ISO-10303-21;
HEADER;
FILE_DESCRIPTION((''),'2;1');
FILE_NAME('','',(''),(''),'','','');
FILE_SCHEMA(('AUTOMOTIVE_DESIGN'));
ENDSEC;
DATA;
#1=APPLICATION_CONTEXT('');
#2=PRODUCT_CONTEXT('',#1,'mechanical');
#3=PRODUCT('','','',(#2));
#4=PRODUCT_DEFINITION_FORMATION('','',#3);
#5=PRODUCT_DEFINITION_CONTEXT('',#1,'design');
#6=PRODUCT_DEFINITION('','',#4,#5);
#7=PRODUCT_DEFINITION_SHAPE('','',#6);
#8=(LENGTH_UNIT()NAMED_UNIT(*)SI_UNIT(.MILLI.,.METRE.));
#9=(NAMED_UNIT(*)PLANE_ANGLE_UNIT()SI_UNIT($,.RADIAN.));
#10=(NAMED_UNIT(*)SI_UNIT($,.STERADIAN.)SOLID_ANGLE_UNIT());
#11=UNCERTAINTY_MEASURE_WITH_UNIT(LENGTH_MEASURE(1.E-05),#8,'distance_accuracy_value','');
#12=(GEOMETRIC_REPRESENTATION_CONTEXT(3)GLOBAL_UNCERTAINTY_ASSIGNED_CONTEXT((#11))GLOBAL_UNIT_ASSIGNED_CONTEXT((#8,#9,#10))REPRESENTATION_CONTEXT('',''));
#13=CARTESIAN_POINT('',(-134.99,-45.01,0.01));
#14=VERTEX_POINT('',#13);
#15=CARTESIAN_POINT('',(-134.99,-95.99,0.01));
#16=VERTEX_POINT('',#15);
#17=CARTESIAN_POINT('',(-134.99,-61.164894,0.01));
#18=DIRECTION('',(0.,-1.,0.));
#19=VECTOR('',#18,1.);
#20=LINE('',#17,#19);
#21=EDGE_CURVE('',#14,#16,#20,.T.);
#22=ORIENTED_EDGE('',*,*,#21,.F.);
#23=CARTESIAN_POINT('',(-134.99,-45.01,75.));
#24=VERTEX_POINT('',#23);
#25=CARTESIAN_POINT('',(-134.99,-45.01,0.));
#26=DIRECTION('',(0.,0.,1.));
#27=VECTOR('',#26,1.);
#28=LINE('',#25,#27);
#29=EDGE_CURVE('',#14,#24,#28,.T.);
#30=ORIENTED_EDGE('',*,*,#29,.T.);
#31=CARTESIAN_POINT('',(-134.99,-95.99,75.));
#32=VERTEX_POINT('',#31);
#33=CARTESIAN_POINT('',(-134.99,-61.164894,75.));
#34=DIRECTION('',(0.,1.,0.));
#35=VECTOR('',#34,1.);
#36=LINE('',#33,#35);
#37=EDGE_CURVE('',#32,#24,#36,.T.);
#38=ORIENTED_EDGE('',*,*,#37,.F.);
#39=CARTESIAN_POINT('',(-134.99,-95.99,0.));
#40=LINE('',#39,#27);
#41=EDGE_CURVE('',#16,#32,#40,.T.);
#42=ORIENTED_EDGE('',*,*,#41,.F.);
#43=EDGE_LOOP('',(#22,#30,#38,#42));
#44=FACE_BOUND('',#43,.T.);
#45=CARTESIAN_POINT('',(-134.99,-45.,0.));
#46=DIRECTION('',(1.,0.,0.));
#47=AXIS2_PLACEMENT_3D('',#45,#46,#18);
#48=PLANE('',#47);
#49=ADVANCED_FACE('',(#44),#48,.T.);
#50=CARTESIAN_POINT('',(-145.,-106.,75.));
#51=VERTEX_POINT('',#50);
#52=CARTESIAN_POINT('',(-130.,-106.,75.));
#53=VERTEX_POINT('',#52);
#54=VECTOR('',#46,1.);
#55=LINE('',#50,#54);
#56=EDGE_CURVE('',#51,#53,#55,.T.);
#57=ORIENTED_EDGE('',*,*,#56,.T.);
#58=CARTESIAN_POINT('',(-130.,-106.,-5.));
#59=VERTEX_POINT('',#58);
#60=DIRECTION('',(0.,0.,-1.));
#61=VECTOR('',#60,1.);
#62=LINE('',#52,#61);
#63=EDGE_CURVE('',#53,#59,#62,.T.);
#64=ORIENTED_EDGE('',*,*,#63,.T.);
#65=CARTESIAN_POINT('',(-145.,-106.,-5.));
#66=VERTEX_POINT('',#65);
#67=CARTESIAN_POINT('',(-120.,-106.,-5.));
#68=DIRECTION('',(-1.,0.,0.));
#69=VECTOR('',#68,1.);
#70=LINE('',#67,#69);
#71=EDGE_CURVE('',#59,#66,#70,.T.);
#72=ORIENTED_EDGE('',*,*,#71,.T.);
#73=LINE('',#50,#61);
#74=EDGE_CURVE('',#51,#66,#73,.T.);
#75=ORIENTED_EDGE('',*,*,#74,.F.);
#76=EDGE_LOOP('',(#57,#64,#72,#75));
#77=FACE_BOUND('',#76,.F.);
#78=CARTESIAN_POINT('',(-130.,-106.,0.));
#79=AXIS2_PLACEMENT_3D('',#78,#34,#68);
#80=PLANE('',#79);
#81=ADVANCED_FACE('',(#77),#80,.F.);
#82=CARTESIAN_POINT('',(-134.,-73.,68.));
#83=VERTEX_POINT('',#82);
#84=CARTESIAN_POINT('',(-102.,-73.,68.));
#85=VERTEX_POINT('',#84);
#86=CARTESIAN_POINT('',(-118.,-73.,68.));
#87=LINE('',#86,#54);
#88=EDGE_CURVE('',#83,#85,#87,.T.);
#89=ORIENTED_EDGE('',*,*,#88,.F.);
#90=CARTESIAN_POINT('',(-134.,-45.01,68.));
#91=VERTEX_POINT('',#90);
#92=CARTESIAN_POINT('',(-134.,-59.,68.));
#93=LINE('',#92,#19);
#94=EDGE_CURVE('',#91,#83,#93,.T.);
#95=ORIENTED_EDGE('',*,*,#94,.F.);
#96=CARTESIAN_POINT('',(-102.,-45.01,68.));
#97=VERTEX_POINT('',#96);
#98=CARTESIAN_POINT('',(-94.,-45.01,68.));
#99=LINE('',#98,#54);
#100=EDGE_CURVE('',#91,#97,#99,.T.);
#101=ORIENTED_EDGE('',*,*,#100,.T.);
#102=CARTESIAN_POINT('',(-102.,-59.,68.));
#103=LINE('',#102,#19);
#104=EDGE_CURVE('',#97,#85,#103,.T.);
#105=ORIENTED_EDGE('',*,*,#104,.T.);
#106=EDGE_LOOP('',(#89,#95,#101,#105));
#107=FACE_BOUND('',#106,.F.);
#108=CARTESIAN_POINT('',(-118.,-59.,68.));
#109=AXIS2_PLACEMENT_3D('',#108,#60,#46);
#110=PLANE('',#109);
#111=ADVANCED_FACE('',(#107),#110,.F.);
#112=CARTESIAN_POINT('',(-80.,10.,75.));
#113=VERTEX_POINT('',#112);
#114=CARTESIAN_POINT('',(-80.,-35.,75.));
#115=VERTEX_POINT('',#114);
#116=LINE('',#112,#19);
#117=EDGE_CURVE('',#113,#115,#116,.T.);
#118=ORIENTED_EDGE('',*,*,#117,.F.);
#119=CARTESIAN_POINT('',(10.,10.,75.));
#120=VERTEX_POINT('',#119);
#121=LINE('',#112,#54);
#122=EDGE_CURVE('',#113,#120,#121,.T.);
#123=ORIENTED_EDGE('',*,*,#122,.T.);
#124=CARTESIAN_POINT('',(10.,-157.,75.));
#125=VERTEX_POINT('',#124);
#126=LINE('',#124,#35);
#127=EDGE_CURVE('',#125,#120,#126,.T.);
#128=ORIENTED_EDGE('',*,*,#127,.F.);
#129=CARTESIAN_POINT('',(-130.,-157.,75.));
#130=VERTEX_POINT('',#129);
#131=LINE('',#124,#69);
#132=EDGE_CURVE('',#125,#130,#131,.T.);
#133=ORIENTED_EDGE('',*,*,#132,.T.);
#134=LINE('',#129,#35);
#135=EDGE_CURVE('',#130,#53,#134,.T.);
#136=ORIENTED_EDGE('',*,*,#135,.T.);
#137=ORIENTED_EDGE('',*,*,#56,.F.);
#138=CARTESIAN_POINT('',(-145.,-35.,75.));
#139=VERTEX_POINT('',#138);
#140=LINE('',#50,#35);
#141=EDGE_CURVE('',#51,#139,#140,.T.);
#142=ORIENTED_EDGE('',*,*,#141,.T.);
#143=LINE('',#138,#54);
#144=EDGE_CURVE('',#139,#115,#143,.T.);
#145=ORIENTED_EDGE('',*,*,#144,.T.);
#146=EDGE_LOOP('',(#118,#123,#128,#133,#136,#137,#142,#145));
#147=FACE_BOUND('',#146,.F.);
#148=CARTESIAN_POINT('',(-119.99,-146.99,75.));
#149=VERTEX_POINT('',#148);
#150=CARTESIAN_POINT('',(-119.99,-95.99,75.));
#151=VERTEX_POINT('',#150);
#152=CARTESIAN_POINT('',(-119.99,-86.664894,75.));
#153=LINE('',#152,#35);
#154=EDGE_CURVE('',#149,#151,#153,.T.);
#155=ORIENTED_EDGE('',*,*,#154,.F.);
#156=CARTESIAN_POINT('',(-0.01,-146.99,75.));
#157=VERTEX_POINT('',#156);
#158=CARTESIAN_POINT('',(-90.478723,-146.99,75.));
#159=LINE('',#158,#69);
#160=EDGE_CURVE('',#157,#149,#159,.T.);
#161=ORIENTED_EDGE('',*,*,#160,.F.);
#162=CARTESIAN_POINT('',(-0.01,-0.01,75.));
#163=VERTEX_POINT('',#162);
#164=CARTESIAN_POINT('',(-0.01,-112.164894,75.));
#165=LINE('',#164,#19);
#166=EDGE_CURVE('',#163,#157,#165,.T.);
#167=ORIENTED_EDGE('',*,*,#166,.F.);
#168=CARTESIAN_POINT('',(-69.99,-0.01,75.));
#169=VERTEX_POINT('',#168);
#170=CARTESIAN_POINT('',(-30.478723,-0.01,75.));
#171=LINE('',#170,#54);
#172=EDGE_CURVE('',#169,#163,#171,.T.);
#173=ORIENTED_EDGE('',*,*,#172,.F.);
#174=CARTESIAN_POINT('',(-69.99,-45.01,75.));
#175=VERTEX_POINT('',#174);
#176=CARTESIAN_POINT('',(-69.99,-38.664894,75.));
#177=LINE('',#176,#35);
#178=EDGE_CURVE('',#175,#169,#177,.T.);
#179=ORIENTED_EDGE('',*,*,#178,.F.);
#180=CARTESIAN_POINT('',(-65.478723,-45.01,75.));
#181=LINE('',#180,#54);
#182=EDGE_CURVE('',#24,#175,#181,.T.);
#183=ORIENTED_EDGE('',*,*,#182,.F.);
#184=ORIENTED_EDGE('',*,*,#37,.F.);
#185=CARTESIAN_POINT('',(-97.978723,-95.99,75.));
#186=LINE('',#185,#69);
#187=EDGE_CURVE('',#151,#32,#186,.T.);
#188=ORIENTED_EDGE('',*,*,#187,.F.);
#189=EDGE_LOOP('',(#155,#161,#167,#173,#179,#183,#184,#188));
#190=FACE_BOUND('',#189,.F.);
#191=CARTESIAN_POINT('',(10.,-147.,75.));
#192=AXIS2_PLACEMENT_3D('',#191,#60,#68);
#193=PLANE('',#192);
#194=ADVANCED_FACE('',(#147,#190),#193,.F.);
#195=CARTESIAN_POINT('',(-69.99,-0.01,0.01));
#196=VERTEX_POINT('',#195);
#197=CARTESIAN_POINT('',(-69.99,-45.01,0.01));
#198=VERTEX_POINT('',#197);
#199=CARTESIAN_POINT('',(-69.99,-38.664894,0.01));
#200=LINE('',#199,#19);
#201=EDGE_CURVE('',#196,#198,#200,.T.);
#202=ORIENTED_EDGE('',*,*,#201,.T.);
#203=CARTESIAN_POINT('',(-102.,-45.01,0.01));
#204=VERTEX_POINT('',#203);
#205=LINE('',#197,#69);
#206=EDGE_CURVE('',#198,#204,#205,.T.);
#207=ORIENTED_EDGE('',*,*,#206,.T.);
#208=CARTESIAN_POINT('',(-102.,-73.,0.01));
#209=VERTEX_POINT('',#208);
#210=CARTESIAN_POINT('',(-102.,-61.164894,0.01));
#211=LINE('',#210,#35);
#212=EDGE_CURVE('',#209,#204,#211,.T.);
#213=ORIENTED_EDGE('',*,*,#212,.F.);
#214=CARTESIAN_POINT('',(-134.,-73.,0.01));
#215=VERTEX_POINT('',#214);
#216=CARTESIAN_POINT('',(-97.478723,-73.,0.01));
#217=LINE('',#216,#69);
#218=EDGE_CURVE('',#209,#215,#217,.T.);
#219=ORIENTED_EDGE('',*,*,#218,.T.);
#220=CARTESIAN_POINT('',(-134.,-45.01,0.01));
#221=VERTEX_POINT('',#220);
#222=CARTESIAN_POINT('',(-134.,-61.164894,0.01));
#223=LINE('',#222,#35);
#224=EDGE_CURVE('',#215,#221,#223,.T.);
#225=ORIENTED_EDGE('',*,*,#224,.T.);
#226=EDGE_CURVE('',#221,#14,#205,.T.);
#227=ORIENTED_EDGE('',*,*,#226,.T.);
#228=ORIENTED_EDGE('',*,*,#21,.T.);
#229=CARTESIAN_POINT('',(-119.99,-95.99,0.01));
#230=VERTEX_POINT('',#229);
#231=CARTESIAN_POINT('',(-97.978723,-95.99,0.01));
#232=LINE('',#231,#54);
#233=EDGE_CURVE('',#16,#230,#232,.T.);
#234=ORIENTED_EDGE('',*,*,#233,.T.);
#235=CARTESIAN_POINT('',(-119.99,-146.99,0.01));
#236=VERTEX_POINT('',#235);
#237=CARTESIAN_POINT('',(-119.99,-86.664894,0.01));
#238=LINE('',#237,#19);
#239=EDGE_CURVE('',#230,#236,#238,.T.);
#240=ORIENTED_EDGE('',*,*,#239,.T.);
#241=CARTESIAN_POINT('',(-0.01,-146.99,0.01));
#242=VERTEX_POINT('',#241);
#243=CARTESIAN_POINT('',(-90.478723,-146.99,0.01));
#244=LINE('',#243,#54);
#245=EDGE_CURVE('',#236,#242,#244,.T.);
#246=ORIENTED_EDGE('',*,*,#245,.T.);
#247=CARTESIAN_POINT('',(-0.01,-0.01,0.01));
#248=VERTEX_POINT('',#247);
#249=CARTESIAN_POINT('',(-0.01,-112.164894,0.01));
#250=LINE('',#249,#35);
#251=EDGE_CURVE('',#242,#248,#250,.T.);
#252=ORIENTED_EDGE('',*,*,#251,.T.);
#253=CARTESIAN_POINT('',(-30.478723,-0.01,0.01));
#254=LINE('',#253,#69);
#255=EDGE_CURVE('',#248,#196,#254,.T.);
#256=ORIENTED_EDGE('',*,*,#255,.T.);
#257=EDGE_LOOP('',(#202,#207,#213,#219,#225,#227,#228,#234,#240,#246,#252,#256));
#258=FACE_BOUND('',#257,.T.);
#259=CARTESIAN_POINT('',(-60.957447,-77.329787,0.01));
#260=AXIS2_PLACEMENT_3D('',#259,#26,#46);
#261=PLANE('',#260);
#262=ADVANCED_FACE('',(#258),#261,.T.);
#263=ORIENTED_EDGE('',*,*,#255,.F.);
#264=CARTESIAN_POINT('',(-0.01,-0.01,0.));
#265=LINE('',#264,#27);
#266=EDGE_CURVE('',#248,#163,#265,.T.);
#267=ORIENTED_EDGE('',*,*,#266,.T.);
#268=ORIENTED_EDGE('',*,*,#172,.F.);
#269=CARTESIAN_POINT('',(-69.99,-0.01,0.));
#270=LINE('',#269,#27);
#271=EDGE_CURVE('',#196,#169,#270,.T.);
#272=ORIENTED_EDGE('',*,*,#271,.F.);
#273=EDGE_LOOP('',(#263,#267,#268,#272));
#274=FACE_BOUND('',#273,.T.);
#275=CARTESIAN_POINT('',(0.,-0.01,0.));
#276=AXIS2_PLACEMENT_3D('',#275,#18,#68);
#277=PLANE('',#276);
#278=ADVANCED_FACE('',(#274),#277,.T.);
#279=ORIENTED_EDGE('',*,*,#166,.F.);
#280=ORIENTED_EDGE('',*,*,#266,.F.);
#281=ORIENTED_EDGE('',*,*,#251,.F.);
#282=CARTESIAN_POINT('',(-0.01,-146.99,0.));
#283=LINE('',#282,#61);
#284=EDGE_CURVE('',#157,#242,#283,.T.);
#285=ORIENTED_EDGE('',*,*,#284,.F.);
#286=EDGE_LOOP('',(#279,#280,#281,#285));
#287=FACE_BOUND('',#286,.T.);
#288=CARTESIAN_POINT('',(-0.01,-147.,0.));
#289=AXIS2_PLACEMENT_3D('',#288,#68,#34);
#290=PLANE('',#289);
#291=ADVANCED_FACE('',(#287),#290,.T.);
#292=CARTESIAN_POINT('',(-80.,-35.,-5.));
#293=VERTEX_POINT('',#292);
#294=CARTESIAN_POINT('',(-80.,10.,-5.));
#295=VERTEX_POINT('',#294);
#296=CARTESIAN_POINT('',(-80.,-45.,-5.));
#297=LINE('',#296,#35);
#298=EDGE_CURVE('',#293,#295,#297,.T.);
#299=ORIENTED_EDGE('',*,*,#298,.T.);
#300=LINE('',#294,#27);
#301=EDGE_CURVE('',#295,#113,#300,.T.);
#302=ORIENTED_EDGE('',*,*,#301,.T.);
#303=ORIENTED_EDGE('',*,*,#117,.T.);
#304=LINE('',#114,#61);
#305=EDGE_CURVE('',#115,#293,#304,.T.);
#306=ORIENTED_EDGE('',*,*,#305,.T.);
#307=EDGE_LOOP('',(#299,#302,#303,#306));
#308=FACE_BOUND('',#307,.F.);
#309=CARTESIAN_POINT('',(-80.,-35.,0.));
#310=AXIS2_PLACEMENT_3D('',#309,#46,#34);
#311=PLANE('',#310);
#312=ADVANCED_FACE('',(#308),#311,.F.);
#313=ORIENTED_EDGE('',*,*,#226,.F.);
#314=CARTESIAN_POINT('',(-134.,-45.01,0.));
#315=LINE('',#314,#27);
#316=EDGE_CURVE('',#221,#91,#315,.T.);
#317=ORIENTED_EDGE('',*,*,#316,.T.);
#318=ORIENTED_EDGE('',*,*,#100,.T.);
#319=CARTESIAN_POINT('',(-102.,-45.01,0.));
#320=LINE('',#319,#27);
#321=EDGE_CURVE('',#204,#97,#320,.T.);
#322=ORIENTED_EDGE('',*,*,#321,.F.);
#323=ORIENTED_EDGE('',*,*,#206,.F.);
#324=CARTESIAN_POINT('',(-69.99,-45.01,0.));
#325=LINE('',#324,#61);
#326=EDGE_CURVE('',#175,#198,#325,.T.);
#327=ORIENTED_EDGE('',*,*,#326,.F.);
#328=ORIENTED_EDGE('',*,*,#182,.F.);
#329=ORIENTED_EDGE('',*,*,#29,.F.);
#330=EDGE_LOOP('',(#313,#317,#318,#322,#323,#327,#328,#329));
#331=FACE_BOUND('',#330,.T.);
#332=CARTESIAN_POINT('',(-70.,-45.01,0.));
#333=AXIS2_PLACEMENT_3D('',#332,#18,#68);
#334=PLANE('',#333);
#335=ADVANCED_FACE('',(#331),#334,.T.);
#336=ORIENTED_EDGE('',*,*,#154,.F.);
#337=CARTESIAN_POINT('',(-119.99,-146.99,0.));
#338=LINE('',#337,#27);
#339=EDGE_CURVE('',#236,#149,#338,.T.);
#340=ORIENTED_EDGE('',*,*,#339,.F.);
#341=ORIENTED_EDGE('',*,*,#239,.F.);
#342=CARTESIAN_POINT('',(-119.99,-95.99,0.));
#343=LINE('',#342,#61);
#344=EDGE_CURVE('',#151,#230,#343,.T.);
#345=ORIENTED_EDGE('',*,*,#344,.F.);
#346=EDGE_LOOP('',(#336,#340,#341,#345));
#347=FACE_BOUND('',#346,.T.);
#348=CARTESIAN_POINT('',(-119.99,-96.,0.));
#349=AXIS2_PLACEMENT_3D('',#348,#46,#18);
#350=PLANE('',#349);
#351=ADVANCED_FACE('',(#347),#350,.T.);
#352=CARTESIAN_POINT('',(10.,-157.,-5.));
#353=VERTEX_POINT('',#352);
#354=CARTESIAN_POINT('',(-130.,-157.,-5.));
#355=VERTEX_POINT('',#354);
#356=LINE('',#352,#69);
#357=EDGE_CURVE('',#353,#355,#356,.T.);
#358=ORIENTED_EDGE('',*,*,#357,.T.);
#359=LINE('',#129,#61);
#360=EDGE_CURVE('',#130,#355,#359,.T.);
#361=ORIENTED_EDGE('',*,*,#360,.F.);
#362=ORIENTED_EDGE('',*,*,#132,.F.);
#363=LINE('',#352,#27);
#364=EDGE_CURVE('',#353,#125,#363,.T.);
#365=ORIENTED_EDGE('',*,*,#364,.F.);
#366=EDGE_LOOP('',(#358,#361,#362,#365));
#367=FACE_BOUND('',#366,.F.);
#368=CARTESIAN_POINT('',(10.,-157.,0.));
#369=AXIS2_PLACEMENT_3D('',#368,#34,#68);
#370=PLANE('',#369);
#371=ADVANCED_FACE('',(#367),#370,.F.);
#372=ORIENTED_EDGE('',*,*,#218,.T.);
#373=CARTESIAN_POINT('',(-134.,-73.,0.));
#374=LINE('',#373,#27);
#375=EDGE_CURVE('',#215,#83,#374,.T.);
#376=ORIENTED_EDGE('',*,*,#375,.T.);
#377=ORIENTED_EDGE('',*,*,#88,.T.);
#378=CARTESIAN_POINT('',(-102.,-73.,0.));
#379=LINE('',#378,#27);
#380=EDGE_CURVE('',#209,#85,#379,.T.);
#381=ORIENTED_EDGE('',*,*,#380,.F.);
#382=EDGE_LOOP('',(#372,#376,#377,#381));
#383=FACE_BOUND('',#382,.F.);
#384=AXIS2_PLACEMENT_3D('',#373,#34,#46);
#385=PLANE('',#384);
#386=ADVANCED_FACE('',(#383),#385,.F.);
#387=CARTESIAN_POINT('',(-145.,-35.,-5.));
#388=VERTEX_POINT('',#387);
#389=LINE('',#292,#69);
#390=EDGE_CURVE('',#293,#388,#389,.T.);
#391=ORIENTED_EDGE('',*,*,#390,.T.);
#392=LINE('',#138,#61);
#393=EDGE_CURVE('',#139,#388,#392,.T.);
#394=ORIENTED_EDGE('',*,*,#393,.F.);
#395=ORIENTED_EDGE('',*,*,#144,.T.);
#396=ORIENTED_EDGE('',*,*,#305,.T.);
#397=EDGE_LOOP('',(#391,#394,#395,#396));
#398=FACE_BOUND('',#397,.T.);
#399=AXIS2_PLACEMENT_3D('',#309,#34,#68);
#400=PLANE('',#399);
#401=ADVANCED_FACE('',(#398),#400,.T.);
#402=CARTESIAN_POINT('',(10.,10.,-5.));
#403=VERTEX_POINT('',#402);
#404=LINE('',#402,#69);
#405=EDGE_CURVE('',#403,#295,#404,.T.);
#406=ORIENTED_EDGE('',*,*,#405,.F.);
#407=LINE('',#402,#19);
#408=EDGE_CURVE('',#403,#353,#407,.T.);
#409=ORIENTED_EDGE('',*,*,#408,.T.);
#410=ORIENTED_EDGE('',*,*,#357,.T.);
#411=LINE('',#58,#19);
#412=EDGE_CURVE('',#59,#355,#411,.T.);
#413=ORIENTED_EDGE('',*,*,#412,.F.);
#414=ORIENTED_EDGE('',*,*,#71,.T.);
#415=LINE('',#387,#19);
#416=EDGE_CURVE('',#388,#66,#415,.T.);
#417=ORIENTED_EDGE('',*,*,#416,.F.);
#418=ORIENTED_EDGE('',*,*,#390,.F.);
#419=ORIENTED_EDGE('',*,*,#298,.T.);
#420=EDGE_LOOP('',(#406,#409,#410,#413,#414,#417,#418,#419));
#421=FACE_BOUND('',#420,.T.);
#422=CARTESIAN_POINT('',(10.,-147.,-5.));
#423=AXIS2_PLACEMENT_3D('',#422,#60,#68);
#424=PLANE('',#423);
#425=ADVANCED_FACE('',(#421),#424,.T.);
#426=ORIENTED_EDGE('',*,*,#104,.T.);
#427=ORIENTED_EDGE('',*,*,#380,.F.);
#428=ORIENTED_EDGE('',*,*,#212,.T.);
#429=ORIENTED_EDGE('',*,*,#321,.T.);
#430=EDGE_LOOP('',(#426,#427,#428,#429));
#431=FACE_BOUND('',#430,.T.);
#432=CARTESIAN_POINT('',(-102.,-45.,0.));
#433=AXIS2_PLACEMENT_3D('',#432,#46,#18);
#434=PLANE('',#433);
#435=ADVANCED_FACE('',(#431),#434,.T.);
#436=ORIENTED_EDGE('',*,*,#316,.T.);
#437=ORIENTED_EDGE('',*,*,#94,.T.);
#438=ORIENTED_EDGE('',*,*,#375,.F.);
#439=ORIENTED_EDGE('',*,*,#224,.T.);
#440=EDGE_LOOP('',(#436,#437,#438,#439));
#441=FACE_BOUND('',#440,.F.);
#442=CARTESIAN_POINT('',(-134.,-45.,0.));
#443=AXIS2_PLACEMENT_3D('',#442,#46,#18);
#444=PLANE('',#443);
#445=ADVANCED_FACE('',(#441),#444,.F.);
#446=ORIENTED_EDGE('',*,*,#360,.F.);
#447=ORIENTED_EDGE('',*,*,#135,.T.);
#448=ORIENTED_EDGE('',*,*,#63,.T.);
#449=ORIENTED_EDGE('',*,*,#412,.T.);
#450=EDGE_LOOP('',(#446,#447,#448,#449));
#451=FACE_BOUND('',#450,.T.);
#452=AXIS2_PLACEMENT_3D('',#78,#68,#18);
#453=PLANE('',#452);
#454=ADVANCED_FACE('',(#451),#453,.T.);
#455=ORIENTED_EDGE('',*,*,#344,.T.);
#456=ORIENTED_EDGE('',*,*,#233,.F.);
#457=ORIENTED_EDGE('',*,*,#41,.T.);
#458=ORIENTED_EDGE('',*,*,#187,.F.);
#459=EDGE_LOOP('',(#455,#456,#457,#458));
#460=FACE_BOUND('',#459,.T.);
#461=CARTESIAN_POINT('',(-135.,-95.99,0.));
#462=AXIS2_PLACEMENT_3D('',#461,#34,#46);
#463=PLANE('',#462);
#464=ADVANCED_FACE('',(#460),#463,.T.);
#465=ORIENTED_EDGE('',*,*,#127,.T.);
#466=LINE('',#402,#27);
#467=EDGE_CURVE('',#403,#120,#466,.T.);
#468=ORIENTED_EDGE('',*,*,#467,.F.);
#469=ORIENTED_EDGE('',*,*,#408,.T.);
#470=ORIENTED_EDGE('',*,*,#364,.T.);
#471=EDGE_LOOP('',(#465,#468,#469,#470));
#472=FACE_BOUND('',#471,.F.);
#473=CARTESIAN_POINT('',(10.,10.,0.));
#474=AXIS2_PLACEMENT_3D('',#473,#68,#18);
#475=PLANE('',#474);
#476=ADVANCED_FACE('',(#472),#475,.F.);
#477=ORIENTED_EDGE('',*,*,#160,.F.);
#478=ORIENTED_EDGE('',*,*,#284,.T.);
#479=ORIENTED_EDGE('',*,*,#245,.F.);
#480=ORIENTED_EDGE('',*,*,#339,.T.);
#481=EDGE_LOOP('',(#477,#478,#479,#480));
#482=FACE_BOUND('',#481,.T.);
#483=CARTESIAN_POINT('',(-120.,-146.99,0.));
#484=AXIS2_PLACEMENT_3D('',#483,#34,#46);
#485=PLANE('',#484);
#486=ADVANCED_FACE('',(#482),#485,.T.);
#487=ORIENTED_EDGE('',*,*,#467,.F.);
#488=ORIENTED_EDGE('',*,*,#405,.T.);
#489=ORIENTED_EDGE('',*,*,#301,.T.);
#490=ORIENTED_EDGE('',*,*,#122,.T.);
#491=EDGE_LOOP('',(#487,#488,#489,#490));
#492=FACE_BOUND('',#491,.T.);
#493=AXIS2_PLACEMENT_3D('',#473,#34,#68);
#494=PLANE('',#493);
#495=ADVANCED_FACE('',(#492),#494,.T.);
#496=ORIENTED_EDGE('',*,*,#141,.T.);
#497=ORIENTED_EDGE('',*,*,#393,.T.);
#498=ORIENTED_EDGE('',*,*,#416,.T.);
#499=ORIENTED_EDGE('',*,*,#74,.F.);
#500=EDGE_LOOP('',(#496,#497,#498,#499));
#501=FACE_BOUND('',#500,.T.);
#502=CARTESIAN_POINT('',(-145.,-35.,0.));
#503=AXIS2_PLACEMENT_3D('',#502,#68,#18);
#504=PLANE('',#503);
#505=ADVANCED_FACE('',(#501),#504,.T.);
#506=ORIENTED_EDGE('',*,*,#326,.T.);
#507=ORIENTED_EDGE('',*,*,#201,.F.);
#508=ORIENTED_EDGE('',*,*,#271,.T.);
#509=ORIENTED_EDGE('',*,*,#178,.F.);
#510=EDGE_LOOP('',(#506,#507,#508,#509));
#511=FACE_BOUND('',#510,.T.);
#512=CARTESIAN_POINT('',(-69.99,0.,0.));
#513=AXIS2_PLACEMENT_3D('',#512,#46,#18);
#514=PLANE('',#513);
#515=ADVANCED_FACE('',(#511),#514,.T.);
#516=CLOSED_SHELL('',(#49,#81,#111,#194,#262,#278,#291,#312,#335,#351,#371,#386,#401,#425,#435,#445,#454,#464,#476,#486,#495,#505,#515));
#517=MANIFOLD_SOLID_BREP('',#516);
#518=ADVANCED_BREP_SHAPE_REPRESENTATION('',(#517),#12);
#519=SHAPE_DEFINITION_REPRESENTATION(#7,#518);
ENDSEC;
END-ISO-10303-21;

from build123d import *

# Parameters (mm, degrees)
F1_DEPTH       = 75
F2_T           = -0.01
F5_DEPTH       = 10
F6_DEPTH       = 10
F7_DEPTH       = 10
F8_DEPTH       = 10
F9_DEPTH       = 10
F10_DEPTH      = 10
F11_DEPTH      = 10
F12_DEPTH      = 10
F13_DEPTH      = 5
F4_E8_BOTTOM_W = 32
F4_E8_BOTTOM_H = 28
F14_DEPTH      = 0.01
F15_DEPTH      = 68


with BuildPart() as f1:
    # F0 (on Top) → F1 (new body)
    with BuildSketch(Plane.XY):
        Polygon((0, -147), (0, 0), (-70, 0), (-70, -45), (-135, -45), (-135, -96), (-120, -96), (-120, -147), align=None)
    extrude(amount=F1_DEPTH)

    # F2
    f2_openings = [f1.faces().sort_by_distance(p)[0] for p in [
        (-58.321727, -80.461003, 75),
    ]]
    offset(amount=F2_T, openings=f2_openings, kind=Kind.INTERSECTION)

    # F5 (add): a face of the model
    f5_faces = [f1.faces().sort_by_distance(p)[0] for p in [
        (0, -73.5, 37.5),
    ]]
    extrude(f5_faces, amount=F5_DEPTH)

    # F6 (add): a face of the model
    f6_faces = [f1.faces().sort_by_distance(p)[0] for p in [
        (-30, 0, 37.5),
    ]]
    extrude(f6_faces, amount=F6_DEPTH)

    # F7 (add): a face of the model
    f7_faces = [f1.faces().sort_by_distance(p)[0] for p in [
        (-70, -17.5, 37.5),
    ]]
    extrude(f7_faces, amount=F7_DEPTH)

    # F8 (add): a face of the model
    f8_faces = [f1.faces().sort_by_distance(p)[0] for p in [
        (-107.5, -45, 37.5),
    ]]
    extrude(f8_faces, amount=F8_DEPTH)

    # F9 (add): a face of the model
    f9_faces = [f1.faces().sort_by_distance(p)[0] for p in [
        (-135, -65.5, 37.5),
    ]]
    extrude(f9_faces, amount=F9_DEPTH)

    # F10 (add): a face of the model
    f10_faces = [f1.faces().sort_by_distance(p)[0] for p in [
        (-132.5, -96, 37.5),
    ]]
    extrude(f10_faces, amount=F10_DEPTH)

    # F11 (add): a face of the model
    f11_faces = [f1.faces().sort_by_distance(p)[0] for p in [
        (-120, -126.5, 37.5),
    ]]
    extrude(f11_faces, amount=F11_DEPTH)

    # F12 (add): a face of the model
    f12_faces = [f1.faces().sort_by_distance(p)[0] for p in [
        (-60, -147, 37.5),
    ]]
    extrude(f12_faces, amount=F12_DEPTH)

    # F13 (add): a face of the model
    f13_faces = [f1.faces().sort_by_distance(p)[0] for p in [
        (-59.1569047083, -79.5398738455, 0),
    ]]
    extrude(f13_faces, amount=F13_DEPTH)

    # F4_E8_bottom (on explicit) → F14 (join, through all)
    with BuildSketch(Plane(origin=(-134, -45, 0), x_dir=(1, 0, 0), z_dir=(0, 0, -1))):
        with Locations((16, 14)):
            Rectangle(F4_E8_BOTTOM_W, F4_E8_BOTTOM_H)
    extrude(amount=-F14_DEPTH)

    # F4_E8_bottom (on explicit) → F15 (join)
    with BuildSketch(Plane(origin=(-134, -45, 0), x_dir=(1, 0, 0), z_dir=(0, 0, -1))):
        with Locations((16, 14)):
            Rectangle(F4_E8_BOTTOM_W, F4_E8_BOTTOM_H)
    extrude(amount=-F15_DEPTH)


solid = f1.part
